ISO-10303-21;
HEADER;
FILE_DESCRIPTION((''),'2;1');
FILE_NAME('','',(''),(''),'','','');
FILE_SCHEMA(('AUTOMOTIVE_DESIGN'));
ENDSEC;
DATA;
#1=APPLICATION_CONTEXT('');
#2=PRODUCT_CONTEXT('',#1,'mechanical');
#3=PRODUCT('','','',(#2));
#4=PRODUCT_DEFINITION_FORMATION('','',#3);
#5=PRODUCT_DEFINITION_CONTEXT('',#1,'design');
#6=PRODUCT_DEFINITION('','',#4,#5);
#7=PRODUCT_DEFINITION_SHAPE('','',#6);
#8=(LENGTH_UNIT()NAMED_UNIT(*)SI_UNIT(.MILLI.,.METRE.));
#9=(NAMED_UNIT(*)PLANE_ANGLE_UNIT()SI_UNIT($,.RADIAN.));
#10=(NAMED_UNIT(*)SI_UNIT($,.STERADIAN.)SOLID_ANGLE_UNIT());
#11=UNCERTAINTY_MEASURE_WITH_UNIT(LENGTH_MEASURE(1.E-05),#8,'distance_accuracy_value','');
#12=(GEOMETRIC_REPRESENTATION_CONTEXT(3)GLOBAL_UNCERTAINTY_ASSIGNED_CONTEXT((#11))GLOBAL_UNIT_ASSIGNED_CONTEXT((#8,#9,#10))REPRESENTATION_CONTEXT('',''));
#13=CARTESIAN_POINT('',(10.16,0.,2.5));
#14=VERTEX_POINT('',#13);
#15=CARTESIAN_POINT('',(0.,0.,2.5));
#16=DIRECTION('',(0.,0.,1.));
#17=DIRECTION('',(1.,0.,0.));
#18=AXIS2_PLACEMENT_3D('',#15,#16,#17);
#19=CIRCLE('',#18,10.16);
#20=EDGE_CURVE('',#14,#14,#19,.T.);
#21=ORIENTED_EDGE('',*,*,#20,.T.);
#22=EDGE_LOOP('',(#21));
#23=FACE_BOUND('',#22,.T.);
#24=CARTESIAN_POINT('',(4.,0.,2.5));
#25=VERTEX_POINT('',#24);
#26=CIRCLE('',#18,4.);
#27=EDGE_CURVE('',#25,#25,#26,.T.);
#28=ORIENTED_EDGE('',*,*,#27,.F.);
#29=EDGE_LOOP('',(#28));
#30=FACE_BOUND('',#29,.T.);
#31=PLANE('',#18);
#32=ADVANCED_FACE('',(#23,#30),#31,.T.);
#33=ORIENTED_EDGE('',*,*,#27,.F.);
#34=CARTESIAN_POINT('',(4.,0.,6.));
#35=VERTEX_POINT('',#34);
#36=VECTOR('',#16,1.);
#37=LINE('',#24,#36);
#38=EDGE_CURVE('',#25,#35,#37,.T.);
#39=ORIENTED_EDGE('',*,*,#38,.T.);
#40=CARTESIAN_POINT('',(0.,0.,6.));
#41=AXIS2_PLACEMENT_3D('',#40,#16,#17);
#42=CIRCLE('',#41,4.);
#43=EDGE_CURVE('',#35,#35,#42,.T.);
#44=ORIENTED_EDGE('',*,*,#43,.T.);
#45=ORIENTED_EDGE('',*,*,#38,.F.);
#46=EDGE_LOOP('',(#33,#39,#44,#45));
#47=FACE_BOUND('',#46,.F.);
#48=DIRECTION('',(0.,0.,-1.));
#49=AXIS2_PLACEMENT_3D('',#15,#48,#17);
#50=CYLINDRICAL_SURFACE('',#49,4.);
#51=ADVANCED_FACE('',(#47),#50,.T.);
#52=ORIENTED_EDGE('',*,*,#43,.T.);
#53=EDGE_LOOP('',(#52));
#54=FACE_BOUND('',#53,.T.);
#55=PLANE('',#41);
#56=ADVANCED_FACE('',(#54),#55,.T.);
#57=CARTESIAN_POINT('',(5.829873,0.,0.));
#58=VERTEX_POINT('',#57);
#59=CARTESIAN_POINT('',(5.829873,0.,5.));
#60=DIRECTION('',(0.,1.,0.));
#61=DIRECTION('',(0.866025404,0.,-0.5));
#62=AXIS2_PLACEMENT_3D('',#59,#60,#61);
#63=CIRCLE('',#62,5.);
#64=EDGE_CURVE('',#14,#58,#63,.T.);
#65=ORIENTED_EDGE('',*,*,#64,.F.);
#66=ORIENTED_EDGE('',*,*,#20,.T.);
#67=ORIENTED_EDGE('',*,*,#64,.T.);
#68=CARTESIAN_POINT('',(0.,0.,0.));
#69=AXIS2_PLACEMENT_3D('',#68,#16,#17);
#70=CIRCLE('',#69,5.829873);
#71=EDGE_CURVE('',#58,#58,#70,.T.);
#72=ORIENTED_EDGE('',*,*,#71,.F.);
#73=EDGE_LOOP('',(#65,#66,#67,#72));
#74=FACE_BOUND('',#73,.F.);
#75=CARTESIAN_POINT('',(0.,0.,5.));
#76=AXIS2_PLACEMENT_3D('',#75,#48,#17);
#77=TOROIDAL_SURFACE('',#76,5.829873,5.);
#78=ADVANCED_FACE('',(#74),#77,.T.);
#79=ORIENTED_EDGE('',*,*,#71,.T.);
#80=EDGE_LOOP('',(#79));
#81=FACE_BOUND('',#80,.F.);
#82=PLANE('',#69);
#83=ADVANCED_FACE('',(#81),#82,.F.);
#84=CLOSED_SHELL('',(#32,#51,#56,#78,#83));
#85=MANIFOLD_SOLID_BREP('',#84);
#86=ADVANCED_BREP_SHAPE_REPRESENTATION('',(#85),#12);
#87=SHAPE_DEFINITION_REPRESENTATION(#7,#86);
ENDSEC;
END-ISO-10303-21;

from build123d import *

# Parameters (mm, degrees)
F0_R     = 10.16
F1_DEPTH = 2.5
F2_R     = 4
F3_DEPTH = 3.5


# Not quite as in the source:
# - a fillet or chamfer that OpenCascade refuses, or shapes differently, is made with other operations: its cross-section is extruded or revolved along the edge and cut away or added


with BuildPart() as f1:
    # F0 (on Top) → F1 (new body)
    with BuildSketch(Plane.XY):
        Circle(F0_R)
    extrude(amount=F1_DEPTH)

    # F2 (on face) → F3 (join)
    with BuildSketch(Plane.XY.offset(2.5)):
        Circle(F2_R)
    extrude(amount=F3_DEPTH)

    # F4: fillet of radius 5 on 1 edges, made by hand

    # F4_s1 → F4_t2 (revolve, cut)
    with BuildSketch(Plane.XZ):
        with BuildLine():
            ThreePointArc((10.16, 2.5), (8.3298729811, 0.6698729811), (5.8298729811, 0))
            Line((5.8298729811, 0), (10.16, 0))
            Line((10.16, 0), (10.16, 2.5))
        make_face()
    revolve(axis=Axis((0, 0, 0), (0, 0, 1)), mode=Mode.SUBTRACT)

    # F5: F1 across plane


with BuildPart() as f1_1:
    add(f1.part)
    add(f1.part.mirror(Plane.XZ))


solid = f1_1.part
